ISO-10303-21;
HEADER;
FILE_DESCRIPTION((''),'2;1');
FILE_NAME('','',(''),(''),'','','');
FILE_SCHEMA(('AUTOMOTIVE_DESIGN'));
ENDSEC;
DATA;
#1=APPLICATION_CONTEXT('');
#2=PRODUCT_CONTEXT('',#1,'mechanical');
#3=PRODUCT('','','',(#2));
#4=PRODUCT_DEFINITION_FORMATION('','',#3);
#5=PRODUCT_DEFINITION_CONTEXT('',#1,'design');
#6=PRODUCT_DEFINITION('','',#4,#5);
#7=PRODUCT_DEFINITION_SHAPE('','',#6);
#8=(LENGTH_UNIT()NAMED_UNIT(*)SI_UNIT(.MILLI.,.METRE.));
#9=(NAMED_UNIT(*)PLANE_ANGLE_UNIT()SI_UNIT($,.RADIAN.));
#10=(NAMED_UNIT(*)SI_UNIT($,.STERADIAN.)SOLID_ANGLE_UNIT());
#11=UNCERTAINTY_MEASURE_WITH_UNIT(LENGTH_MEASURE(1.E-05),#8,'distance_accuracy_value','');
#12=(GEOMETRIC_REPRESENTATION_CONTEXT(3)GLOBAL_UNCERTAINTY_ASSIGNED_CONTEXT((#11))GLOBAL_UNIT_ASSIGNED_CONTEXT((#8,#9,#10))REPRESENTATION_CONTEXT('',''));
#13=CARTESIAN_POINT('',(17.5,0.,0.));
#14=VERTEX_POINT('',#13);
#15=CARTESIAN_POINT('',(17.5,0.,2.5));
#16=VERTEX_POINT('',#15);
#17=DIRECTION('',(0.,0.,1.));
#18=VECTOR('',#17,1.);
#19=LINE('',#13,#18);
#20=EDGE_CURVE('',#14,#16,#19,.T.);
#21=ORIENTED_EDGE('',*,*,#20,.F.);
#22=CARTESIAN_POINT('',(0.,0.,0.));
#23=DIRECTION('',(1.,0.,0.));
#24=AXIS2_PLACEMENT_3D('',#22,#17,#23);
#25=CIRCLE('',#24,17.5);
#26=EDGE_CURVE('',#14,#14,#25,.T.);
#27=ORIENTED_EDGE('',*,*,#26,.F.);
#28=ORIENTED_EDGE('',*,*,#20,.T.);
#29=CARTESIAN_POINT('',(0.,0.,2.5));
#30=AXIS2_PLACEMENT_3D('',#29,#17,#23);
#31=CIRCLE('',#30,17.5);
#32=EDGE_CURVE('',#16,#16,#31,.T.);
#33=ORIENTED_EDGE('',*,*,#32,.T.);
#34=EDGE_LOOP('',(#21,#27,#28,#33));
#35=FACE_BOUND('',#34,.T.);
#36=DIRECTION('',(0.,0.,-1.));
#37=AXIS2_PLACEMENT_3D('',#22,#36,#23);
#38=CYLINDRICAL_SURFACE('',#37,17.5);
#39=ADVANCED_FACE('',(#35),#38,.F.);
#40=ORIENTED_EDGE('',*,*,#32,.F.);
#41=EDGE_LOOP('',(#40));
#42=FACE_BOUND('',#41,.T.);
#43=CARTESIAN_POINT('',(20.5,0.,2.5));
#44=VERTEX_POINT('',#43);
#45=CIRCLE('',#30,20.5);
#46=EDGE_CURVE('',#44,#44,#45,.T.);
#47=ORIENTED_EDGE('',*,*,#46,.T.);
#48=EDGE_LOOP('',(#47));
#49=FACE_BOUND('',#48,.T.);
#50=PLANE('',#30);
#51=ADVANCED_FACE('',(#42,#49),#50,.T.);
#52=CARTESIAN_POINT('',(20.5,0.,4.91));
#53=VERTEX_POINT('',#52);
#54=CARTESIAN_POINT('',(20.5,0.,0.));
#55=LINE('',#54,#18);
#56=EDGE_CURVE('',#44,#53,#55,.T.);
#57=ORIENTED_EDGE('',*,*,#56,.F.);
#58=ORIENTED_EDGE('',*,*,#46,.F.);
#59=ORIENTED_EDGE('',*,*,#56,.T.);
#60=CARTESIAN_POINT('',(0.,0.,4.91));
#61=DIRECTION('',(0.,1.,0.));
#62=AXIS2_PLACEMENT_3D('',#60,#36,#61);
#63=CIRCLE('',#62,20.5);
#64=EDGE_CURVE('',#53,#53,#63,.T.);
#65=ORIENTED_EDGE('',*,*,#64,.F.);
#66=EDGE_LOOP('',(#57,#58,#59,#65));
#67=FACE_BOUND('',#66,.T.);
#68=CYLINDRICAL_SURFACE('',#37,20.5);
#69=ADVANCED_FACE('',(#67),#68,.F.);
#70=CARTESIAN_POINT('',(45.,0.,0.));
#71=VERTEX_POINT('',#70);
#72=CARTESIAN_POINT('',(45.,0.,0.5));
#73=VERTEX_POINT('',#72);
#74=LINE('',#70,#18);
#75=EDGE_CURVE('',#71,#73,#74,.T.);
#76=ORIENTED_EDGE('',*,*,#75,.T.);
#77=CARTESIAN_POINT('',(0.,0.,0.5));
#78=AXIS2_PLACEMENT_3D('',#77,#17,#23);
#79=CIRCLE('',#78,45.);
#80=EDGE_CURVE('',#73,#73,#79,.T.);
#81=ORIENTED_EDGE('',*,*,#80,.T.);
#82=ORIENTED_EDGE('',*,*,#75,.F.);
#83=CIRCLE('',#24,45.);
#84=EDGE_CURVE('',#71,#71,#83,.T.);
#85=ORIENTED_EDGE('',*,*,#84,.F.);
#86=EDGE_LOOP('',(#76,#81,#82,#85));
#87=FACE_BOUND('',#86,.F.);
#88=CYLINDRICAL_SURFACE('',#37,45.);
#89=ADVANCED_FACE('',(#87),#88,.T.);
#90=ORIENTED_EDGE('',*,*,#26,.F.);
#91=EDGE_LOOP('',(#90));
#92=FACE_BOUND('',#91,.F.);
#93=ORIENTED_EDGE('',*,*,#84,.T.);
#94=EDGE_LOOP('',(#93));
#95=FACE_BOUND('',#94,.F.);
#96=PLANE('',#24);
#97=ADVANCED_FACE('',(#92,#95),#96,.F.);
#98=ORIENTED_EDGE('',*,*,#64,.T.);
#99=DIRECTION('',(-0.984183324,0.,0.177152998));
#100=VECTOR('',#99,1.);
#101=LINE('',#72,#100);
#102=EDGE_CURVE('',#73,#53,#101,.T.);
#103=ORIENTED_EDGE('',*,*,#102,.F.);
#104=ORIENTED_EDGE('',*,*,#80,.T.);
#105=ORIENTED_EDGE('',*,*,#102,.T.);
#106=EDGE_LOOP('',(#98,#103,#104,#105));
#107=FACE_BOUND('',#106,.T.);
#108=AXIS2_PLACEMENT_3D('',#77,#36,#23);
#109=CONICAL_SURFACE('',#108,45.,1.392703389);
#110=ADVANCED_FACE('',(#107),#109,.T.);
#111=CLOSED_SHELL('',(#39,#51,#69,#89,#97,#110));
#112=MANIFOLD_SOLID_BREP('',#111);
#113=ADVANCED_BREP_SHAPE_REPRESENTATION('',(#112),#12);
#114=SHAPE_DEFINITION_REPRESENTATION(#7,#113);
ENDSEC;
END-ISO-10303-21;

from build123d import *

# Parameters (mm, degrees)
F0_R     = 45
F0_R_2   = 20.5
F1_DEPTH = 5
F0_R_3   = 17.5
F2_DEPTH = 2.5


# Not quite as in the source:
# - a fillet or chamfer that OpenCascade refuses, or shapes differently, is made with other operations: its cross-section is extruded or revolved along the edge and cut away or added


with BuildPart() as f1:
    # F0 (on Top) → F1 (new body)
    with BuildSketch(Plane.XY):
        Circle(F0_R)
        Circle(F0_R_2, mode=Mode.SUBTRACT)
    extrude(amount=F1_DEPTH)

    # F0 (on Top) → F2 (join)
    with BuildSketch(Plane.XY):
        Circle(F0_R_2)
        Circle(F0_R_3, mode=Mode.SUBTRACT)
    extrude(amount=F2_DEPTH)

    # F3: chamfer of 25 x 4.5 on 1 edges, made by hand

    # F3_s1 → F3_t2 (revolve, cut)
    with BuildSketch(Plane.XZ):
        Polygon((45, 0.5), (20, 5), (45, 5), align=None)
    revolve(axis=Axis((0, 0, 5), (0, 0, 1)), mode=Mode.SUBTRACT)


solid = f1.part
